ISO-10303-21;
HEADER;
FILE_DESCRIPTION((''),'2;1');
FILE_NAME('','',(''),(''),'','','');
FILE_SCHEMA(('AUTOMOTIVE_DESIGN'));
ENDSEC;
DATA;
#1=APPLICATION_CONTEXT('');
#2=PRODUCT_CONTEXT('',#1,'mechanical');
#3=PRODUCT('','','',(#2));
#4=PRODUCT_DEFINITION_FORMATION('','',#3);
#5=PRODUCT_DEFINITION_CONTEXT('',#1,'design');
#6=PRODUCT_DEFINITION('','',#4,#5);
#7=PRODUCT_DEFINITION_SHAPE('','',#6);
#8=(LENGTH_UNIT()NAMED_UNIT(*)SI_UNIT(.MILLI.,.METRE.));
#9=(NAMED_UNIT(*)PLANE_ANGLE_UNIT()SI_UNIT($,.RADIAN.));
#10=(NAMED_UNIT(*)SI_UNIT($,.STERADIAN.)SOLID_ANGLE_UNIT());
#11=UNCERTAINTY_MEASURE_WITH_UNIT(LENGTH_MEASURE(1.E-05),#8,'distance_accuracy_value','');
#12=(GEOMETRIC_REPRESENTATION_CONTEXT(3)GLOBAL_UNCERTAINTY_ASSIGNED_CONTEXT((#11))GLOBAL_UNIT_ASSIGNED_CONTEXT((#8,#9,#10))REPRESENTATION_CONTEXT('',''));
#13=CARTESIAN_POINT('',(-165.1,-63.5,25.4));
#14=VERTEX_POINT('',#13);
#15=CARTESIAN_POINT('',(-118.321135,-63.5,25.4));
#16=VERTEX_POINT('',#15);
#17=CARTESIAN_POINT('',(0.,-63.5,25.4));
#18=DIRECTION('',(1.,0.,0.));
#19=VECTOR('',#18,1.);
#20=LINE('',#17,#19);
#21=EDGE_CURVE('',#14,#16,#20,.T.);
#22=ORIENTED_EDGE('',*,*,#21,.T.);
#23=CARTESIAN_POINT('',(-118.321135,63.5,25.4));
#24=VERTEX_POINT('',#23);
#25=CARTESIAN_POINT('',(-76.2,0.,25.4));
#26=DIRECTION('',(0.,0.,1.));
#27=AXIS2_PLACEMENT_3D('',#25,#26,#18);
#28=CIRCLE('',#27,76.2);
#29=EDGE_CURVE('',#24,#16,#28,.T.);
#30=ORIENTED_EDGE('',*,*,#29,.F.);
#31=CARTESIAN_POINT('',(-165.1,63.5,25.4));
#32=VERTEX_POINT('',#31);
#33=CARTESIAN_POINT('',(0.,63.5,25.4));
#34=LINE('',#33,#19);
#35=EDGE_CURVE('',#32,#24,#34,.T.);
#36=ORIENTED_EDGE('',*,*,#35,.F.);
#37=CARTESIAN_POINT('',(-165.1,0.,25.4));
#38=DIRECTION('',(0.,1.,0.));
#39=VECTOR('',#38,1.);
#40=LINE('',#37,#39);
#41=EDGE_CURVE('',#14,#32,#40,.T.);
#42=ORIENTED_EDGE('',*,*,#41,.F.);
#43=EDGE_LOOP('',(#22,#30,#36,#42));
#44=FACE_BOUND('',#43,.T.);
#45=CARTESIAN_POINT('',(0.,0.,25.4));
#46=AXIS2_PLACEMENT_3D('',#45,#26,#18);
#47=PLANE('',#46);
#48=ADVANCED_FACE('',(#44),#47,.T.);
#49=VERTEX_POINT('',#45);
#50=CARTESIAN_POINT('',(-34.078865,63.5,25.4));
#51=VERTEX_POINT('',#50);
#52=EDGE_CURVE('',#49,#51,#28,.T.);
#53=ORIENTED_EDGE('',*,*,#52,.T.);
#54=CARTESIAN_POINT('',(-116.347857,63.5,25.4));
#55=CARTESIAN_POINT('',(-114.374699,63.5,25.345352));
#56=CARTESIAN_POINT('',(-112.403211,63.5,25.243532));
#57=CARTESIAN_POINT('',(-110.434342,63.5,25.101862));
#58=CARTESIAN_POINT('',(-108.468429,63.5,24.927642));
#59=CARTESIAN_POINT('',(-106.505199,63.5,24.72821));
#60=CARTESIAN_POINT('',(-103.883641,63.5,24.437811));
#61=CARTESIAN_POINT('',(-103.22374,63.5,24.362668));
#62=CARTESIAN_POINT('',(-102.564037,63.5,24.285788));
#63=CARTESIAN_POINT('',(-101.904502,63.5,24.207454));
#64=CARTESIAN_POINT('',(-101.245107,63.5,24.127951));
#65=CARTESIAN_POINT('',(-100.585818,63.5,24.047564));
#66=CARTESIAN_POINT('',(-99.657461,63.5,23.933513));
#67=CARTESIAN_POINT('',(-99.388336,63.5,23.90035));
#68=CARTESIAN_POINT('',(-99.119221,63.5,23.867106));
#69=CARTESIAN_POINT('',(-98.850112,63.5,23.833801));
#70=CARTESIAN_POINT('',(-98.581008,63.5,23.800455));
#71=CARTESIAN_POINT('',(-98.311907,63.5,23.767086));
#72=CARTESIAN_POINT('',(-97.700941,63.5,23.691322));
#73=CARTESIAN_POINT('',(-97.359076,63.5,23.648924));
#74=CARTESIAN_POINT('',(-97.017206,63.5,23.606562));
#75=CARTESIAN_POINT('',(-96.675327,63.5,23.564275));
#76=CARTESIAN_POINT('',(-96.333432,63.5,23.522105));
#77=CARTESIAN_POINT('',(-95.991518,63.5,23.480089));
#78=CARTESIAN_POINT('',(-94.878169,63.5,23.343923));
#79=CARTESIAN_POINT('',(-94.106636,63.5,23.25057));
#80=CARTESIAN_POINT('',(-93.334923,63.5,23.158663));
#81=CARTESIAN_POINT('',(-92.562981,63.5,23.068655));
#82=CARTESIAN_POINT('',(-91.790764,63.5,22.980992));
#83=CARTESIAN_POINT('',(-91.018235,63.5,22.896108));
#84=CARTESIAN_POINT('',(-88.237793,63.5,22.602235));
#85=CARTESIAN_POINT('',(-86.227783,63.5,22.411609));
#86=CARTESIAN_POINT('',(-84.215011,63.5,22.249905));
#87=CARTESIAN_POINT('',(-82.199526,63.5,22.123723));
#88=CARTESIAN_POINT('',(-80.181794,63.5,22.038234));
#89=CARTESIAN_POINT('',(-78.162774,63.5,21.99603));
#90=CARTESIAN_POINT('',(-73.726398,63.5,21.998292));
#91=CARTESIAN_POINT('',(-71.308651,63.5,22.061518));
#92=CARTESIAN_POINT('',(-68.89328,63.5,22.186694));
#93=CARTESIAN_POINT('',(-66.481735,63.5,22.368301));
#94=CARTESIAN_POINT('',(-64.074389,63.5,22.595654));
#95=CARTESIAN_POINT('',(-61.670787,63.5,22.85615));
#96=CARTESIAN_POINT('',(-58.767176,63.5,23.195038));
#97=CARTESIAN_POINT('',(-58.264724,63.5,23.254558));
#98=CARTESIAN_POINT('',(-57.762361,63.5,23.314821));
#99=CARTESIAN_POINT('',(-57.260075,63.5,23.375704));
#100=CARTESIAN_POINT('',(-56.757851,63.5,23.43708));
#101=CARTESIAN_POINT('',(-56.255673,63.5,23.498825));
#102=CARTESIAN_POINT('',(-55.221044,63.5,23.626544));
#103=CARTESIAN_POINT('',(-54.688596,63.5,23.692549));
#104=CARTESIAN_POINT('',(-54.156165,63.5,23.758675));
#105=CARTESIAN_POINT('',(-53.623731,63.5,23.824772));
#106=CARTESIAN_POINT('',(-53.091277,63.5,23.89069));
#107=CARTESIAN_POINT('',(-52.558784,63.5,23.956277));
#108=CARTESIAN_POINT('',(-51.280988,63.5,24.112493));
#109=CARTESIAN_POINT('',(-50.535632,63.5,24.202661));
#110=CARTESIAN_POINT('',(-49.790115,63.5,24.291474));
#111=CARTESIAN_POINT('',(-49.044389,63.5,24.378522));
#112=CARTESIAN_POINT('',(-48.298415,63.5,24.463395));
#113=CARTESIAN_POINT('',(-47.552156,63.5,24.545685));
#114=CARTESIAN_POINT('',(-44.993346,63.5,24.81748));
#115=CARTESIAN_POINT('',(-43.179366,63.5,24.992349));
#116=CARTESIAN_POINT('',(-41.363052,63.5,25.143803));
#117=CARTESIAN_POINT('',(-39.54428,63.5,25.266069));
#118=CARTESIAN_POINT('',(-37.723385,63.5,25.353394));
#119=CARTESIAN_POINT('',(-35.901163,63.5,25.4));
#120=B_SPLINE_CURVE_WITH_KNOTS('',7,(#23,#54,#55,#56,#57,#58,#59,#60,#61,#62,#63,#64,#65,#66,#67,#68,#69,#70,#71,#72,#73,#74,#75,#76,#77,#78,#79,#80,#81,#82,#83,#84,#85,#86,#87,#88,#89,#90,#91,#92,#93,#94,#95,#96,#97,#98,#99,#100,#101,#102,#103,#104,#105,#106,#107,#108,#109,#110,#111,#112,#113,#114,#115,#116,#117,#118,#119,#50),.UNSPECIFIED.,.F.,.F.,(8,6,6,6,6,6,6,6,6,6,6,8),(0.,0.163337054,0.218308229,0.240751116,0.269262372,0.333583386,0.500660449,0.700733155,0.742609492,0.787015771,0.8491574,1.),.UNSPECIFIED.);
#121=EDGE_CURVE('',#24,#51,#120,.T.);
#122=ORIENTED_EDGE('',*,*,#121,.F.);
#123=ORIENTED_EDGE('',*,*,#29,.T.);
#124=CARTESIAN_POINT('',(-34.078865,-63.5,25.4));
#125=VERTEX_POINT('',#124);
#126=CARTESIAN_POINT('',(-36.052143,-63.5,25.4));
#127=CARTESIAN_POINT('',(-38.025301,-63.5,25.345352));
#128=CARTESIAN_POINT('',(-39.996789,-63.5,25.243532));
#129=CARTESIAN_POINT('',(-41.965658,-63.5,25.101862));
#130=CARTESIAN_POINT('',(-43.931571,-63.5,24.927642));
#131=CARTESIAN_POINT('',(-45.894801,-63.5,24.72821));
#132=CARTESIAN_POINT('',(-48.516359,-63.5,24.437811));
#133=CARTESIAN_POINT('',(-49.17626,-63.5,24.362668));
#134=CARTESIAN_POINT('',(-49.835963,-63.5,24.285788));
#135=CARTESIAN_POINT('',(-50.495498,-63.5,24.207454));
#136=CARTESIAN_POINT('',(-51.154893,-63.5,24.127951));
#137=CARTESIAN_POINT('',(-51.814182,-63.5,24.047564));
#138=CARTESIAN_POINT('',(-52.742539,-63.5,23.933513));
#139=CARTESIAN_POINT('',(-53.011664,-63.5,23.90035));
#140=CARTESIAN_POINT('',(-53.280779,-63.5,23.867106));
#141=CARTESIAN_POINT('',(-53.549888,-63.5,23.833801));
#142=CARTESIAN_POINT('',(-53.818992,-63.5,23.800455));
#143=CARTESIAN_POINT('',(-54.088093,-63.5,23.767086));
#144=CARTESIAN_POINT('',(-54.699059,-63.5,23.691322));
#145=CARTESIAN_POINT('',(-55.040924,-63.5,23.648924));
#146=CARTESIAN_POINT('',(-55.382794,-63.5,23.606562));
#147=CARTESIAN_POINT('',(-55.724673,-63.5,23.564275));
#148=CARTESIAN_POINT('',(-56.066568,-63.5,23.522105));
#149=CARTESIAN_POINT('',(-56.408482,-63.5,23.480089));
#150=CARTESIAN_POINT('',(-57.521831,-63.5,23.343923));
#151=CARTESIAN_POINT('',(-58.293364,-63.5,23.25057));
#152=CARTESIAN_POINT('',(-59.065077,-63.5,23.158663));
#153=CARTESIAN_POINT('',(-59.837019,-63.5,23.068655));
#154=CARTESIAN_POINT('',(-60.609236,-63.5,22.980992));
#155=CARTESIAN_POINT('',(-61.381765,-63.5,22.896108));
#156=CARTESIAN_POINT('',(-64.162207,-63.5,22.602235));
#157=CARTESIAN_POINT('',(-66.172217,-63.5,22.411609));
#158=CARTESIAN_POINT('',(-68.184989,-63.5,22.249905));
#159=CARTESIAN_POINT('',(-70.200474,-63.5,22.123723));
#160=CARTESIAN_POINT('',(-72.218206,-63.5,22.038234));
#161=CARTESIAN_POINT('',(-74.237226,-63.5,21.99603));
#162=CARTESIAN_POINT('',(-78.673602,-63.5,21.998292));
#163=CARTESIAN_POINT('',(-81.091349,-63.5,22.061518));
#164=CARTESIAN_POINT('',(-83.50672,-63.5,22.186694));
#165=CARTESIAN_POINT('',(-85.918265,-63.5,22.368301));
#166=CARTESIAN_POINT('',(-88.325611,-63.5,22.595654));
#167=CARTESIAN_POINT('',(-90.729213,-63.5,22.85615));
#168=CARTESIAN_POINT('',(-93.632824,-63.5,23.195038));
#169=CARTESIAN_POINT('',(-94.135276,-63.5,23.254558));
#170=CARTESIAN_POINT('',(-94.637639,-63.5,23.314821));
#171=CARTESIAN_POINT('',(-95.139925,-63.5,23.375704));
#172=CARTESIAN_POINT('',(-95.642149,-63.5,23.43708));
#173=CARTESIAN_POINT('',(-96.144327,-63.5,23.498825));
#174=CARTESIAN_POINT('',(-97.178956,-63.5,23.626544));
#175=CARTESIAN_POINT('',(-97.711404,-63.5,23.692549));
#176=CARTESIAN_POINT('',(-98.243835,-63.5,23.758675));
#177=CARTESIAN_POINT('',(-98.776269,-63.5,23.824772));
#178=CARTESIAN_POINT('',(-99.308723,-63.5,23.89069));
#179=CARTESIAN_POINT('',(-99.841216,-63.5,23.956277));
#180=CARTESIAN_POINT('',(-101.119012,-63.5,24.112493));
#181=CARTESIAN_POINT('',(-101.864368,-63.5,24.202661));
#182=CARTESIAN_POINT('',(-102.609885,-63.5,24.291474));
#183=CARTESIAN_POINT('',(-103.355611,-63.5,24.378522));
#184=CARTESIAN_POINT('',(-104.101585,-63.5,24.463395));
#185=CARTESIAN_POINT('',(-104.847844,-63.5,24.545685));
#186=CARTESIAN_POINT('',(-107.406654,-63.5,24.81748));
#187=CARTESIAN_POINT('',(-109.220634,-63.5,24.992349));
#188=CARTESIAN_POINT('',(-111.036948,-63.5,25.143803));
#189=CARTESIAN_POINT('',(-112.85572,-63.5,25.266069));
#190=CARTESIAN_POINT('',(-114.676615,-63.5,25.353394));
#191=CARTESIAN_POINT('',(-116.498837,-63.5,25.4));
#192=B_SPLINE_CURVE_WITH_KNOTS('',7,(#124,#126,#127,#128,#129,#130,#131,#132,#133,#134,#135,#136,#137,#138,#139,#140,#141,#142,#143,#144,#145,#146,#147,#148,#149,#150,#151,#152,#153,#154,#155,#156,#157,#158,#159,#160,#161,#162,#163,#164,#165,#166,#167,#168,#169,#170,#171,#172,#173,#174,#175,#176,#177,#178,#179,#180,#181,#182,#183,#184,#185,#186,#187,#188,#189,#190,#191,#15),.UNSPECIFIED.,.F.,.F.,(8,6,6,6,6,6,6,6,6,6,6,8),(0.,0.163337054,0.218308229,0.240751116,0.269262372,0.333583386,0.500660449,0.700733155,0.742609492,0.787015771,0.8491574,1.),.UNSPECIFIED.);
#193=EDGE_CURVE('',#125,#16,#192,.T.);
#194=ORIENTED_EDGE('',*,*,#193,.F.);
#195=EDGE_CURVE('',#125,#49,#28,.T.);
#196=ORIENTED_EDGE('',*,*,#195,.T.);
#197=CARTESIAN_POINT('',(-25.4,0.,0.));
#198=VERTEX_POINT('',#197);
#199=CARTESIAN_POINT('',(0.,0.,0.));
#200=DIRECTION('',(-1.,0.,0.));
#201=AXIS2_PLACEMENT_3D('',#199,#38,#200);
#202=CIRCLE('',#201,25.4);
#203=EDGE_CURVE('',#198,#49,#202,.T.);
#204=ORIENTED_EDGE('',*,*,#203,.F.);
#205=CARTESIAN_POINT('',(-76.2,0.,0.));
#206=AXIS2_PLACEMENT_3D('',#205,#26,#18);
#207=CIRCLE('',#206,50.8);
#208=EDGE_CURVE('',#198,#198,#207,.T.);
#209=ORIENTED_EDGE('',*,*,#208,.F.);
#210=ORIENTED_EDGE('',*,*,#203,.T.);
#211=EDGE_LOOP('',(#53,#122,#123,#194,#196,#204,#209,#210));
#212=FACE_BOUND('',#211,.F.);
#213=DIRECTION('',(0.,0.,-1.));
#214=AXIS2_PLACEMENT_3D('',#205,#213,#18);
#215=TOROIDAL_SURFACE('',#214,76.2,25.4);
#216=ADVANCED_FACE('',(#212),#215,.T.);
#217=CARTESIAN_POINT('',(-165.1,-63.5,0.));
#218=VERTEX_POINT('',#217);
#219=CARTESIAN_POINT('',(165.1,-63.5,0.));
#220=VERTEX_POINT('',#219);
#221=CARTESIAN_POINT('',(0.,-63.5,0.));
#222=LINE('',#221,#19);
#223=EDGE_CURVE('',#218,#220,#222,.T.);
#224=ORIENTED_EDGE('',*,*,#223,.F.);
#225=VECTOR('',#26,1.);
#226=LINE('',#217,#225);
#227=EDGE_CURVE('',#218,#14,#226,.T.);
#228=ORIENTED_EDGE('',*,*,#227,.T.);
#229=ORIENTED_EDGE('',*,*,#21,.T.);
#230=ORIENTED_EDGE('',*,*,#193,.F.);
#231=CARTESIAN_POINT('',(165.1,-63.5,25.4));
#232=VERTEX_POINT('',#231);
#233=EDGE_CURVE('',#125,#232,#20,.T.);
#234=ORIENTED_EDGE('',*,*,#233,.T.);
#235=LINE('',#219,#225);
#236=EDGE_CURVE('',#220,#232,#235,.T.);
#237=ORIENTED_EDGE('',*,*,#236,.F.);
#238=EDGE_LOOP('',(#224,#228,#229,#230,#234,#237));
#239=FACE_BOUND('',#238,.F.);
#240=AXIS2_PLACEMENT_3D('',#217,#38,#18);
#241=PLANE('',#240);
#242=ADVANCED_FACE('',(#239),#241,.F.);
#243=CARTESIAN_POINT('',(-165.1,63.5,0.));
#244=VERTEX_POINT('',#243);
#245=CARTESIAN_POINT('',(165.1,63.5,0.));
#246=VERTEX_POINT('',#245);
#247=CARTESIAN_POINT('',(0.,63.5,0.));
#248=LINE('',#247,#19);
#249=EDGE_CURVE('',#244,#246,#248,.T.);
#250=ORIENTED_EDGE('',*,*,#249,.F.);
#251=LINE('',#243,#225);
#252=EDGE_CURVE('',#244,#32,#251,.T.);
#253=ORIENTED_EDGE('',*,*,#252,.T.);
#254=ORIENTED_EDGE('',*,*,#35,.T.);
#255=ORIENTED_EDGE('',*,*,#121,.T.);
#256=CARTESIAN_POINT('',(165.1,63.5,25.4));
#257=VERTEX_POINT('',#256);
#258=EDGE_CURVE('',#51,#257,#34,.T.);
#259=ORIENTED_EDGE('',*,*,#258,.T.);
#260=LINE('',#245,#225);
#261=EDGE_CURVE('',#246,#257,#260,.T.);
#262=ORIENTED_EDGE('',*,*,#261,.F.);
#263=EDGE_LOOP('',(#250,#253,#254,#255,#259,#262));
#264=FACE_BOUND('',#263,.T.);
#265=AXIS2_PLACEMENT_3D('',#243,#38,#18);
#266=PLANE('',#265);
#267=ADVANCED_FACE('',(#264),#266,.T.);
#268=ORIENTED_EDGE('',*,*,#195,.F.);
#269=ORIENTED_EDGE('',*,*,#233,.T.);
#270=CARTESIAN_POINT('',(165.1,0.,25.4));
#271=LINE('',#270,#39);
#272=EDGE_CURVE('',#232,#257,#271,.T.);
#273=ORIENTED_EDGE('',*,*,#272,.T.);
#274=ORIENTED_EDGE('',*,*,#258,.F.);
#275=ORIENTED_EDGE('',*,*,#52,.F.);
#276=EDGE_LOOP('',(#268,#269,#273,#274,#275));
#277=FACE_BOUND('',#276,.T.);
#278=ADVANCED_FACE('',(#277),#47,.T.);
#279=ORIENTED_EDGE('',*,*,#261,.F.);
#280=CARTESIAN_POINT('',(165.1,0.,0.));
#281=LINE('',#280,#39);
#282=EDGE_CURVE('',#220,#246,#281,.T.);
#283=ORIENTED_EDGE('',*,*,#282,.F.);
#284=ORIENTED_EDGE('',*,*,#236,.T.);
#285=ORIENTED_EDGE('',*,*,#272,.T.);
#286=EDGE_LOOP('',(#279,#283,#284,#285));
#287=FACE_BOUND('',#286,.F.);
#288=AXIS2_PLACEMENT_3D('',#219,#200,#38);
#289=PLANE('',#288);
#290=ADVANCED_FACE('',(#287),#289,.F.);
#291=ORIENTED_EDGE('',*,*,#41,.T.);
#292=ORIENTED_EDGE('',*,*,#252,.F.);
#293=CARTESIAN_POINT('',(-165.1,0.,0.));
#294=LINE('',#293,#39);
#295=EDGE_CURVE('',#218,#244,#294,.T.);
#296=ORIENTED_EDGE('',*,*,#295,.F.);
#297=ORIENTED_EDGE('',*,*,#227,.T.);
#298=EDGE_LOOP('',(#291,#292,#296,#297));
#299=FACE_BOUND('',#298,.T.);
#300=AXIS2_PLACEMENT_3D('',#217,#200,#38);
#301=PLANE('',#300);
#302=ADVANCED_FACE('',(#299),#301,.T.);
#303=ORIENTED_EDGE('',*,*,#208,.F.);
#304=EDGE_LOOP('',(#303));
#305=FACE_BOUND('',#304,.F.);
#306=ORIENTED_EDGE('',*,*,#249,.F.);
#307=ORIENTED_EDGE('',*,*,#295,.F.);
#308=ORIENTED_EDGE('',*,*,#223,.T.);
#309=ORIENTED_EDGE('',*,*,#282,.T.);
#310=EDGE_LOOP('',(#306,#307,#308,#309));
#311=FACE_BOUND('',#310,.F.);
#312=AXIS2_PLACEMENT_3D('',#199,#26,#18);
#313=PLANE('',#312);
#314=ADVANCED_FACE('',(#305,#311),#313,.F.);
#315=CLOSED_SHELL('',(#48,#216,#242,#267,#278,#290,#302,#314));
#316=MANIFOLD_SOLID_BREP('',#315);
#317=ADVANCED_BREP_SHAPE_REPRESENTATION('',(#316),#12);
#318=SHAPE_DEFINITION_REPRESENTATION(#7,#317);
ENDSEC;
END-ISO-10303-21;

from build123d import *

# Parameters (mm, degrees)
F0_W     = 330.2
F0_H     = 127
F0_R     = 50.8
F1_DEPTH = 25.4


# Not quite as in the source:
# - a fillet or chamfer that OpenCascade refuses, or shapes differently, is made with other operations: its cross-section is extruded or revolved along the edge and cut away or added


with BuildPart() as f1:
    # F0 (on Top) → F1 (new body)
    with BuildSketch(Plane.XY):
        Rectangle(F0_W, F0_H)
        with Locations((-76.2, 0)):
            Circle(F0_R, mode=Mode.SUBTRACT)
    extrude(amount=F1_DEPTH)

    # F2: fillet of radius 25.4 on 1 edges, made by hand

    # F2_s1 → F2_t2 (revolve, cut)
    with BuildSketch(Plane.XZ):
        with BuildLine():
            ThreePointArc((-25.4, 0), (-17.9605122421, 17.9605122421), (0, 25.4))
            Line((0, 25.4), (-25.4, 25.4))
            Line((-25.4, 25.4), (-25.4, 0))
        make_face()
    revolve(axis=Axis((-76.2, 0, 25.4), (0, 0, 1)), mode=Mode.SUBTRACT)


solid = f1.part
